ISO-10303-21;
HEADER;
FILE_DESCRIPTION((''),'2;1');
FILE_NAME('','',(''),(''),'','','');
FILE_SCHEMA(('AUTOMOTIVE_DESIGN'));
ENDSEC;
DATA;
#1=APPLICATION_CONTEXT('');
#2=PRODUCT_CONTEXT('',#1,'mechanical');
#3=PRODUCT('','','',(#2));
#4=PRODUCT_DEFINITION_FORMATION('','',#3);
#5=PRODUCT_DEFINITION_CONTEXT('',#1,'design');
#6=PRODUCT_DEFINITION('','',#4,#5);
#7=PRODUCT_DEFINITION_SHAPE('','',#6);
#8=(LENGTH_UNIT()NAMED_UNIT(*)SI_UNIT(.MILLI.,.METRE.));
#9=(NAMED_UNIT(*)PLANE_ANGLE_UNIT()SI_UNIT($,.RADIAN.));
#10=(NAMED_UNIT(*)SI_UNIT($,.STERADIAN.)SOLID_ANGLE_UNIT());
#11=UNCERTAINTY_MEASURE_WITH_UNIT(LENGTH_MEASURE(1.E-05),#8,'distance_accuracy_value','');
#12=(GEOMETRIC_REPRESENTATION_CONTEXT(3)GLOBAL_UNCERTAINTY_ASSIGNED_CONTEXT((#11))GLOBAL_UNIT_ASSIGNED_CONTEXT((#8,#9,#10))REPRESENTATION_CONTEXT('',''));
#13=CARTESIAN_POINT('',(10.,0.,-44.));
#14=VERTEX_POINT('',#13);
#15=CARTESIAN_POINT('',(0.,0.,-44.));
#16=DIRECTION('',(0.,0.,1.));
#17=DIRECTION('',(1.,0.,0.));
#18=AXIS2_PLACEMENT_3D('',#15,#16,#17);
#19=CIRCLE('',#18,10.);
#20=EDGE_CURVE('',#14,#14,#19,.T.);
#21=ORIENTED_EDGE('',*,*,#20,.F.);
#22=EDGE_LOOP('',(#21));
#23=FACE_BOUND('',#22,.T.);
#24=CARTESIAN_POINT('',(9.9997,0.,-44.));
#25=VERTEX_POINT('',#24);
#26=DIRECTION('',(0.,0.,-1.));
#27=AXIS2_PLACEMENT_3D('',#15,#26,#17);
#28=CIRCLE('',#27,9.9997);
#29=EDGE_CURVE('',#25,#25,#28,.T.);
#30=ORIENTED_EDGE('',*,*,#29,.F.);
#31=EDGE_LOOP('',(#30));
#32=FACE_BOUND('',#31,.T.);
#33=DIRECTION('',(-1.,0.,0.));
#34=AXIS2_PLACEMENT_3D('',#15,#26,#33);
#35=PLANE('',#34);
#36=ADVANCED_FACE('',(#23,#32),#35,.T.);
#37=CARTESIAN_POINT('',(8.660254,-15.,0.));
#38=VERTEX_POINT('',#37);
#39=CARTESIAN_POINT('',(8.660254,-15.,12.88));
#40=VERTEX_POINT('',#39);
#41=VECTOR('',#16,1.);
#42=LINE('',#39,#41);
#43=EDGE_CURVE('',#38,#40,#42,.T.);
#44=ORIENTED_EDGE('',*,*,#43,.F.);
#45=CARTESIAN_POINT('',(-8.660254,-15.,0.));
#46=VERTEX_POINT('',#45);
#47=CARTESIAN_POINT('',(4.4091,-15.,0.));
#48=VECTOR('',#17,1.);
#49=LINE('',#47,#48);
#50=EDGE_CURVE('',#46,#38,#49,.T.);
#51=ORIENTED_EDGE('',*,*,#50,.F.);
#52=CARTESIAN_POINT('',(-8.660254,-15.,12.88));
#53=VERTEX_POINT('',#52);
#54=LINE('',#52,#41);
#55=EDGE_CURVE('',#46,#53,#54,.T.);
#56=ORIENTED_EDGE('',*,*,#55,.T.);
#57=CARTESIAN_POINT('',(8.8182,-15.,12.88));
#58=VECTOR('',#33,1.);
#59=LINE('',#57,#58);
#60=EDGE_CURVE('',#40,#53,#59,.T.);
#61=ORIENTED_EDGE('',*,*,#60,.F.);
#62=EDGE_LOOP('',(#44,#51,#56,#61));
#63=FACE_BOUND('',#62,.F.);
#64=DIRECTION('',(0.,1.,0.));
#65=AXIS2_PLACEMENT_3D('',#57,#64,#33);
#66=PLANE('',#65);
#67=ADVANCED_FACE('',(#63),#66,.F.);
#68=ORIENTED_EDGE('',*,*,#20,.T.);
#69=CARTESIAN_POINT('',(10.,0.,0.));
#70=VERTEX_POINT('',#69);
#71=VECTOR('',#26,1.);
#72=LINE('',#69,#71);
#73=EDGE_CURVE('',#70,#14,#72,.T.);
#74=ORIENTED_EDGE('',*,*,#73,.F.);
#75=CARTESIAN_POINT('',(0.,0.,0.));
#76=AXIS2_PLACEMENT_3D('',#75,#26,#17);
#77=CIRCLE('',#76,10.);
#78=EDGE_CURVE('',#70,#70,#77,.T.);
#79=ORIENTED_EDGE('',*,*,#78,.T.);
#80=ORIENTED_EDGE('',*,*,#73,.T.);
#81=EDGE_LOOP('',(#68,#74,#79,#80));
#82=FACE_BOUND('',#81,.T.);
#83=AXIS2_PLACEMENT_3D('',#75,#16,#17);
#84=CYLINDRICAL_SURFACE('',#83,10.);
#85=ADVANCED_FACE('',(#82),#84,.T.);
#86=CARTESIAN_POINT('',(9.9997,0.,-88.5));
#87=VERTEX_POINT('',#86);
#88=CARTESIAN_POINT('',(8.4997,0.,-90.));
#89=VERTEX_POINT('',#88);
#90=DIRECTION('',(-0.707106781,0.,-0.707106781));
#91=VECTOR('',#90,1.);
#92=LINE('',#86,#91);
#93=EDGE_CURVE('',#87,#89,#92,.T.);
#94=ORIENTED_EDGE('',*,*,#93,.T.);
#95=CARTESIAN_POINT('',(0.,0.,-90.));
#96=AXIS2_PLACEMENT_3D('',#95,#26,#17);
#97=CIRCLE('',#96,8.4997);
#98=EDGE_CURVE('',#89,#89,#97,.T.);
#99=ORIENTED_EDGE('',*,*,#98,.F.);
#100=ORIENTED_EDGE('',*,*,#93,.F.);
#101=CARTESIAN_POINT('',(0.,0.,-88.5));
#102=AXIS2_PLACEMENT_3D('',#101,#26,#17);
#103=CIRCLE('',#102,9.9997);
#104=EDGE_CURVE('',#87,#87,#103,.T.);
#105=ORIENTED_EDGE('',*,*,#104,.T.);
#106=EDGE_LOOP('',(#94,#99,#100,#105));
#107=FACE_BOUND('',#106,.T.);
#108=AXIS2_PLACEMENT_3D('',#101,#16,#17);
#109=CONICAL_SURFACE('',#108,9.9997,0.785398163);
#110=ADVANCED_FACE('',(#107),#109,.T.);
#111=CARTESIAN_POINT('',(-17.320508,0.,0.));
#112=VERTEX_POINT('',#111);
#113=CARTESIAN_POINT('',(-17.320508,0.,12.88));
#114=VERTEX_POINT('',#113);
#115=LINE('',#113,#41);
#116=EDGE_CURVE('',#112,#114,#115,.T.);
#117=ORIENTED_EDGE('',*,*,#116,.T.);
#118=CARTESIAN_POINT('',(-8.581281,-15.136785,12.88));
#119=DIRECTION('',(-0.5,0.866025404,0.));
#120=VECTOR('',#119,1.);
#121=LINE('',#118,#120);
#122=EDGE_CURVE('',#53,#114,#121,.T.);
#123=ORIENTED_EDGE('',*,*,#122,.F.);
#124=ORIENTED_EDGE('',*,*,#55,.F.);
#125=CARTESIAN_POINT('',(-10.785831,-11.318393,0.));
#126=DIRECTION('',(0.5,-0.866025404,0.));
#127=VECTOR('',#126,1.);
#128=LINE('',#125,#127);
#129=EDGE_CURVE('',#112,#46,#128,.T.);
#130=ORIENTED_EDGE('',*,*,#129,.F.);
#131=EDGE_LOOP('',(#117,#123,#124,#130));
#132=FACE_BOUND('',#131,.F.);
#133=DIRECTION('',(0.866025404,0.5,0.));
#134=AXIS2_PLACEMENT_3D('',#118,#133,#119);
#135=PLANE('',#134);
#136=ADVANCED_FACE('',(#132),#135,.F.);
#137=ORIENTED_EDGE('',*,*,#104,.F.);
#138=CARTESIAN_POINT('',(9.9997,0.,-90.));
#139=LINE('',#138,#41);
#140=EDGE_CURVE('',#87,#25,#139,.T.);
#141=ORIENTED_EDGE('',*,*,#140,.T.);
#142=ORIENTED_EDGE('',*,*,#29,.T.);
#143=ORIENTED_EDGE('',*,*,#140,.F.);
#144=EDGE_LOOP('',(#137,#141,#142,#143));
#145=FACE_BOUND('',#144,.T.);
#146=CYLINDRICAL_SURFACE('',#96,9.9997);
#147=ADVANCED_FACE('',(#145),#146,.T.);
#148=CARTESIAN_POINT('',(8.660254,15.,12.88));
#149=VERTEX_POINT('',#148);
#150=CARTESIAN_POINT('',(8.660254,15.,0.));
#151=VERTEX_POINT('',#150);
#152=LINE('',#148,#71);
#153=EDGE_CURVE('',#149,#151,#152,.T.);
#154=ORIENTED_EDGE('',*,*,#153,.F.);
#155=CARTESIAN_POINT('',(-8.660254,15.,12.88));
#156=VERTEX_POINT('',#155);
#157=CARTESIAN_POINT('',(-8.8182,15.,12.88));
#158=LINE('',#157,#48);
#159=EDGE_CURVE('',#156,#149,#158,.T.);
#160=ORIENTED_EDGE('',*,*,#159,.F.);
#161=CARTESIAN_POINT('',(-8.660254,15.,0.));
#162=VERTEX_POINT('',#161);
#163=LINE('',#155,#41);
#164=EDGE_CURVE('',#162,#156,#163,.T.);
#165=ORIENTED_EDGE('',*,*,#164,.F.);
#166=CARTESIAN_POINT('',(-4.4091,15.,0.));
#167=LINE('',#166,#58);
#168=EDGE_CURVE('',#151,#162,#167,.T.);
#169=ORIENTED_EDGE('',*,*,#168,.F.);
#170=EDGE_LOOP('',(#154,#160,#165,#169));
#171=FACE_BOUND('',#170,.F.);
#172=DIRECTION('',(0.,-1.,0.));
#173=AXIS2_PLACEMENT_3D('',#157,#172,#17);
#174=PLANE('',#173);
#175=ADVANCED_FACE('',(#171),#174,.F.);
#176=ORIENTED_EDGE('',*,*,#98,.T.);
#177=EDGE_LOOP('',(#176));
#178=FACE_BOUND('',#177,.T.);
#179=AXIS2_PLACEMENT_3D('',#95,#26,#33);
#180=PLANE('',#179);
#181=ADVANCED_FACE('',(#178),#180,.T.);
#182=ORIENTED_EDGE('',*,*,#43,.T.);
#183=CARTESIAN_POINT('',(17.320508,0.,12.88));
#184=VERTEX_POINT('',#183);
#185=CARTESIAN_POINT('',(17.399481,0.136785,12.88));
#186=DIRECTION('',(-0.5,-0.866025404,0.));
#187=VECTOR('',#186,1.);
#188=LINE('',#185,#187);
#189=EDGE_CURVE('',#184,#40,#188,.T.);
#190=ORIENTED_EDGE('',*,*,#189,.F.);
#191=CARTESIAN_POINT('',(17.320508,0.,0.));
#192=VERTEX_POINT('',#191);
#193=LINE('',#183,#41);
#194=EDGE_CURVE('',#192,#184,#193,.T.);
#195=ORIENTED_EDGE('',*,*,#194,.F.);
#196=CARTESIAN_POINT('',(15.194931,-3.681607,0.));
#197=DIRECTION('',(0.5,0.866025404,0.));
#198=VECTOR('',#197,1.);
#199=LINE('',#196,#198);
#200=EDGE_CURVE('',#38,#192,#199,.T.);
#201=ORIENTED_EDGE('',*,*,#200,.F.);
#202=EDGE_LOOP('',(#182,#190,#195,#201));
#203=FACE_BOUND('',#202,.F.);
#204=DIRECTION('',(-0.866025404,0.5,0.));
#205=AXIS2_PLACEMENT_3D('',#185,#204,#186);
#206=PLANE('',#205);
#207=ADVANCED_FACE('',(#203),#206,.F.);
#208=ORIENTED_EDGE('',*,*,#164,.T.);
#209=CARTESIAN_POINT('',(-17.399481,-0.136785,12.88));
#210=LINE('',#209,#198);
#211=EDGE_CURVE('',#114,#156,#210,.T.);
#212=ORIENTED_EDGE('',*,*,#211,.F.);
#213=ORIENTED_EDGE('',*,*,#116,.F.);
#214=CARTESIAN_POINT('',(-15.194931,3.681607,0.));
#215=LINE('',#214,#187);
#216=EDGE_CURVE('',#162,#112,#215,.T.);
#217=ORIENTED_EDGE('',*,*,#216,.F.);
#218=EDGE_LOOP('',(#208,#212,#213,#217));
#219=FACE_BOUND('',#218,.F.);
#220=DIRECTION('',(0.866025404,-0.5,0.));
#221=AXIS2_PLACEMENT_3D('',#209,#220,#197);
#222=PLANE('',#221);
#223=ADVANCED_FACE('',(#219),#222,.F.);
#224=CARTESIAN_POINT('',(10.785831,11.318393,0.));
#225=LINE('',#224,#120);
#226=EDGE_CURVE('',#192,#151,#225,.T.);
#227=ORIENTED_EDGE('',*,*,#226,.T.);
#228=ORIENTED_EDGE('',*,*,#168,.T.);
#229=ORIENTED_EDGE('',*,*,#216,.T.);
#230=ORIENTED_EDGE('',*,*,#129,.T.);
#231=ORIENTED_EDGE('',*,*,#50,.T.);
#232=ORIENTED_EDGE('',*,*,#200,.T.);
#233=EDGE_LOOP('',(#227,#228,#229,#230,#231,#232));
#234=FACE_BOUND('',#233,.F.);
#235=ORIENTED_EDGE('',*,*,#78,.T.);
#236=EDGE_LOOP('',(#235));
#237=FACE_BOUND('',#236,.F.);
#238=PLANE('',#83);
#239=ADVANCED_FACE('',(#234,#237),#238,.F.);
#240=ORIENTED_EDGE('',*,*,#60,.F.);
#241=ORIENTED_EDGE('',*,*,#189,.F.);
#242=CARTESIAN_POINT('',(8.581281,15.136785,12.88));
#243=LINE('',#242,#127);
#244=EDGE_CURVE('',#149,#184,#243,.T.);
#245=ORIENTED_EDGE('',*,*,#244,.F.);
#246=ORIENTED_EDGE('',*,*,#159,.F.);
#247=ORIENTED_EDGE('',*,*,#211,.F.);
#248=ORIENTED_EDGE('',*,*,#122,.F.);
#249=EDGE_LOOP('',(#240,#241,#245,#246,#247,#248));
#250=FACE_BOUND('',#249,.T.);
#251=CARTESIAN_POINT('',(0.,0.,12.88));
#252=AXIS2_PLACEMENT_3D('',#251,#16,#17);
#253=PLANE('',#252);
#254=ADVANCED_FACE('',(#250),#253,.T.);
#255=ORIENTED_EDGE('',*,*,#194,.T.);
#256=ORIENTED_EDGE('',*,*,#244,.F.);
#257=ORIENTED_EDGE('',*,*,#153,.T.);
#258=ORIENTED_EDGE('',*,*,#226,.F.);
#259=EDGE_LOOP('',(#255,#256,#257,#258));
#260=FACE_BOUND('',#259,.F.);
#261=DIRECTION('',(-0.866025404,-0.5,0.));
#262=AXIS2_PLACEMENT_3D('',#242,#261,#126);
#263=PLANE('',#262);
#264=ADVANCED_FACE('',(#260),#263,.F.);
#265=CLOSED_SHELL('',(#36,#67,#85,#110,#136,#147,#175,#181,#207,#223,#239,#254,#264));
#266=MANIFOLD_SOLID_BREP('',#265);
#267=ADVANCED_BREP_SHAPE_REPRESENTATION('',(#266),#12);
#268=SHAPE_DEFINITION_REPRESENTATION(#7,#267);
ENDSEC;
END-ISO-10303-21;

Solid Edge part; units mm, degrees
sketch "Sketch1" plane through (0, 0, 0) normal (0, 0, 1) x (1, 0, 0)
  circle A0 centre (0, 0) radius 17.4
  dimension "D1" = 34.8
extrude "Protrusion1" add sketch "Sketch1" along normal blind 12.88
sketch "Sketch2" plane through (0, 0, 0) normal (0, 0, -1) x (1, 0, 0)
  circle A0 centre (0, 0) radius 10
extrude "Protrusion2" add sketch "Sketch2" along normal blind 90
sketch "Sketch3" plane through (0, 0, -90) normal (0, 0, -1) x (1, 0, 0)
  circle A0 centre (0, 0) radius 9.9997
extrude "Cutout1" cut sketch "Sketch3" against normal blind 46 flip side to cut
chamfer "Chamfer_1" distance 1.5 angle 45 1 edges at (-9.9997, 0, -90)
sketch "Sketch4" plane through (0, 0, 12.88) normal (0, 0, 1) x (1, 0, 0)
  line L0 (-8.8182, 15) -> (8.8182, 15)
  dimension "D1" = 30
extrude "Cutout2" cut sketch "Sketch4" against normal up to next material side at (0, 15.05, 12.88)
pattern_circular "Pattern1" count 6 over 360 about axis through (0, 0, 12.88) along (0, 0, 1) of "Cutout2"
properties part number "108475"
